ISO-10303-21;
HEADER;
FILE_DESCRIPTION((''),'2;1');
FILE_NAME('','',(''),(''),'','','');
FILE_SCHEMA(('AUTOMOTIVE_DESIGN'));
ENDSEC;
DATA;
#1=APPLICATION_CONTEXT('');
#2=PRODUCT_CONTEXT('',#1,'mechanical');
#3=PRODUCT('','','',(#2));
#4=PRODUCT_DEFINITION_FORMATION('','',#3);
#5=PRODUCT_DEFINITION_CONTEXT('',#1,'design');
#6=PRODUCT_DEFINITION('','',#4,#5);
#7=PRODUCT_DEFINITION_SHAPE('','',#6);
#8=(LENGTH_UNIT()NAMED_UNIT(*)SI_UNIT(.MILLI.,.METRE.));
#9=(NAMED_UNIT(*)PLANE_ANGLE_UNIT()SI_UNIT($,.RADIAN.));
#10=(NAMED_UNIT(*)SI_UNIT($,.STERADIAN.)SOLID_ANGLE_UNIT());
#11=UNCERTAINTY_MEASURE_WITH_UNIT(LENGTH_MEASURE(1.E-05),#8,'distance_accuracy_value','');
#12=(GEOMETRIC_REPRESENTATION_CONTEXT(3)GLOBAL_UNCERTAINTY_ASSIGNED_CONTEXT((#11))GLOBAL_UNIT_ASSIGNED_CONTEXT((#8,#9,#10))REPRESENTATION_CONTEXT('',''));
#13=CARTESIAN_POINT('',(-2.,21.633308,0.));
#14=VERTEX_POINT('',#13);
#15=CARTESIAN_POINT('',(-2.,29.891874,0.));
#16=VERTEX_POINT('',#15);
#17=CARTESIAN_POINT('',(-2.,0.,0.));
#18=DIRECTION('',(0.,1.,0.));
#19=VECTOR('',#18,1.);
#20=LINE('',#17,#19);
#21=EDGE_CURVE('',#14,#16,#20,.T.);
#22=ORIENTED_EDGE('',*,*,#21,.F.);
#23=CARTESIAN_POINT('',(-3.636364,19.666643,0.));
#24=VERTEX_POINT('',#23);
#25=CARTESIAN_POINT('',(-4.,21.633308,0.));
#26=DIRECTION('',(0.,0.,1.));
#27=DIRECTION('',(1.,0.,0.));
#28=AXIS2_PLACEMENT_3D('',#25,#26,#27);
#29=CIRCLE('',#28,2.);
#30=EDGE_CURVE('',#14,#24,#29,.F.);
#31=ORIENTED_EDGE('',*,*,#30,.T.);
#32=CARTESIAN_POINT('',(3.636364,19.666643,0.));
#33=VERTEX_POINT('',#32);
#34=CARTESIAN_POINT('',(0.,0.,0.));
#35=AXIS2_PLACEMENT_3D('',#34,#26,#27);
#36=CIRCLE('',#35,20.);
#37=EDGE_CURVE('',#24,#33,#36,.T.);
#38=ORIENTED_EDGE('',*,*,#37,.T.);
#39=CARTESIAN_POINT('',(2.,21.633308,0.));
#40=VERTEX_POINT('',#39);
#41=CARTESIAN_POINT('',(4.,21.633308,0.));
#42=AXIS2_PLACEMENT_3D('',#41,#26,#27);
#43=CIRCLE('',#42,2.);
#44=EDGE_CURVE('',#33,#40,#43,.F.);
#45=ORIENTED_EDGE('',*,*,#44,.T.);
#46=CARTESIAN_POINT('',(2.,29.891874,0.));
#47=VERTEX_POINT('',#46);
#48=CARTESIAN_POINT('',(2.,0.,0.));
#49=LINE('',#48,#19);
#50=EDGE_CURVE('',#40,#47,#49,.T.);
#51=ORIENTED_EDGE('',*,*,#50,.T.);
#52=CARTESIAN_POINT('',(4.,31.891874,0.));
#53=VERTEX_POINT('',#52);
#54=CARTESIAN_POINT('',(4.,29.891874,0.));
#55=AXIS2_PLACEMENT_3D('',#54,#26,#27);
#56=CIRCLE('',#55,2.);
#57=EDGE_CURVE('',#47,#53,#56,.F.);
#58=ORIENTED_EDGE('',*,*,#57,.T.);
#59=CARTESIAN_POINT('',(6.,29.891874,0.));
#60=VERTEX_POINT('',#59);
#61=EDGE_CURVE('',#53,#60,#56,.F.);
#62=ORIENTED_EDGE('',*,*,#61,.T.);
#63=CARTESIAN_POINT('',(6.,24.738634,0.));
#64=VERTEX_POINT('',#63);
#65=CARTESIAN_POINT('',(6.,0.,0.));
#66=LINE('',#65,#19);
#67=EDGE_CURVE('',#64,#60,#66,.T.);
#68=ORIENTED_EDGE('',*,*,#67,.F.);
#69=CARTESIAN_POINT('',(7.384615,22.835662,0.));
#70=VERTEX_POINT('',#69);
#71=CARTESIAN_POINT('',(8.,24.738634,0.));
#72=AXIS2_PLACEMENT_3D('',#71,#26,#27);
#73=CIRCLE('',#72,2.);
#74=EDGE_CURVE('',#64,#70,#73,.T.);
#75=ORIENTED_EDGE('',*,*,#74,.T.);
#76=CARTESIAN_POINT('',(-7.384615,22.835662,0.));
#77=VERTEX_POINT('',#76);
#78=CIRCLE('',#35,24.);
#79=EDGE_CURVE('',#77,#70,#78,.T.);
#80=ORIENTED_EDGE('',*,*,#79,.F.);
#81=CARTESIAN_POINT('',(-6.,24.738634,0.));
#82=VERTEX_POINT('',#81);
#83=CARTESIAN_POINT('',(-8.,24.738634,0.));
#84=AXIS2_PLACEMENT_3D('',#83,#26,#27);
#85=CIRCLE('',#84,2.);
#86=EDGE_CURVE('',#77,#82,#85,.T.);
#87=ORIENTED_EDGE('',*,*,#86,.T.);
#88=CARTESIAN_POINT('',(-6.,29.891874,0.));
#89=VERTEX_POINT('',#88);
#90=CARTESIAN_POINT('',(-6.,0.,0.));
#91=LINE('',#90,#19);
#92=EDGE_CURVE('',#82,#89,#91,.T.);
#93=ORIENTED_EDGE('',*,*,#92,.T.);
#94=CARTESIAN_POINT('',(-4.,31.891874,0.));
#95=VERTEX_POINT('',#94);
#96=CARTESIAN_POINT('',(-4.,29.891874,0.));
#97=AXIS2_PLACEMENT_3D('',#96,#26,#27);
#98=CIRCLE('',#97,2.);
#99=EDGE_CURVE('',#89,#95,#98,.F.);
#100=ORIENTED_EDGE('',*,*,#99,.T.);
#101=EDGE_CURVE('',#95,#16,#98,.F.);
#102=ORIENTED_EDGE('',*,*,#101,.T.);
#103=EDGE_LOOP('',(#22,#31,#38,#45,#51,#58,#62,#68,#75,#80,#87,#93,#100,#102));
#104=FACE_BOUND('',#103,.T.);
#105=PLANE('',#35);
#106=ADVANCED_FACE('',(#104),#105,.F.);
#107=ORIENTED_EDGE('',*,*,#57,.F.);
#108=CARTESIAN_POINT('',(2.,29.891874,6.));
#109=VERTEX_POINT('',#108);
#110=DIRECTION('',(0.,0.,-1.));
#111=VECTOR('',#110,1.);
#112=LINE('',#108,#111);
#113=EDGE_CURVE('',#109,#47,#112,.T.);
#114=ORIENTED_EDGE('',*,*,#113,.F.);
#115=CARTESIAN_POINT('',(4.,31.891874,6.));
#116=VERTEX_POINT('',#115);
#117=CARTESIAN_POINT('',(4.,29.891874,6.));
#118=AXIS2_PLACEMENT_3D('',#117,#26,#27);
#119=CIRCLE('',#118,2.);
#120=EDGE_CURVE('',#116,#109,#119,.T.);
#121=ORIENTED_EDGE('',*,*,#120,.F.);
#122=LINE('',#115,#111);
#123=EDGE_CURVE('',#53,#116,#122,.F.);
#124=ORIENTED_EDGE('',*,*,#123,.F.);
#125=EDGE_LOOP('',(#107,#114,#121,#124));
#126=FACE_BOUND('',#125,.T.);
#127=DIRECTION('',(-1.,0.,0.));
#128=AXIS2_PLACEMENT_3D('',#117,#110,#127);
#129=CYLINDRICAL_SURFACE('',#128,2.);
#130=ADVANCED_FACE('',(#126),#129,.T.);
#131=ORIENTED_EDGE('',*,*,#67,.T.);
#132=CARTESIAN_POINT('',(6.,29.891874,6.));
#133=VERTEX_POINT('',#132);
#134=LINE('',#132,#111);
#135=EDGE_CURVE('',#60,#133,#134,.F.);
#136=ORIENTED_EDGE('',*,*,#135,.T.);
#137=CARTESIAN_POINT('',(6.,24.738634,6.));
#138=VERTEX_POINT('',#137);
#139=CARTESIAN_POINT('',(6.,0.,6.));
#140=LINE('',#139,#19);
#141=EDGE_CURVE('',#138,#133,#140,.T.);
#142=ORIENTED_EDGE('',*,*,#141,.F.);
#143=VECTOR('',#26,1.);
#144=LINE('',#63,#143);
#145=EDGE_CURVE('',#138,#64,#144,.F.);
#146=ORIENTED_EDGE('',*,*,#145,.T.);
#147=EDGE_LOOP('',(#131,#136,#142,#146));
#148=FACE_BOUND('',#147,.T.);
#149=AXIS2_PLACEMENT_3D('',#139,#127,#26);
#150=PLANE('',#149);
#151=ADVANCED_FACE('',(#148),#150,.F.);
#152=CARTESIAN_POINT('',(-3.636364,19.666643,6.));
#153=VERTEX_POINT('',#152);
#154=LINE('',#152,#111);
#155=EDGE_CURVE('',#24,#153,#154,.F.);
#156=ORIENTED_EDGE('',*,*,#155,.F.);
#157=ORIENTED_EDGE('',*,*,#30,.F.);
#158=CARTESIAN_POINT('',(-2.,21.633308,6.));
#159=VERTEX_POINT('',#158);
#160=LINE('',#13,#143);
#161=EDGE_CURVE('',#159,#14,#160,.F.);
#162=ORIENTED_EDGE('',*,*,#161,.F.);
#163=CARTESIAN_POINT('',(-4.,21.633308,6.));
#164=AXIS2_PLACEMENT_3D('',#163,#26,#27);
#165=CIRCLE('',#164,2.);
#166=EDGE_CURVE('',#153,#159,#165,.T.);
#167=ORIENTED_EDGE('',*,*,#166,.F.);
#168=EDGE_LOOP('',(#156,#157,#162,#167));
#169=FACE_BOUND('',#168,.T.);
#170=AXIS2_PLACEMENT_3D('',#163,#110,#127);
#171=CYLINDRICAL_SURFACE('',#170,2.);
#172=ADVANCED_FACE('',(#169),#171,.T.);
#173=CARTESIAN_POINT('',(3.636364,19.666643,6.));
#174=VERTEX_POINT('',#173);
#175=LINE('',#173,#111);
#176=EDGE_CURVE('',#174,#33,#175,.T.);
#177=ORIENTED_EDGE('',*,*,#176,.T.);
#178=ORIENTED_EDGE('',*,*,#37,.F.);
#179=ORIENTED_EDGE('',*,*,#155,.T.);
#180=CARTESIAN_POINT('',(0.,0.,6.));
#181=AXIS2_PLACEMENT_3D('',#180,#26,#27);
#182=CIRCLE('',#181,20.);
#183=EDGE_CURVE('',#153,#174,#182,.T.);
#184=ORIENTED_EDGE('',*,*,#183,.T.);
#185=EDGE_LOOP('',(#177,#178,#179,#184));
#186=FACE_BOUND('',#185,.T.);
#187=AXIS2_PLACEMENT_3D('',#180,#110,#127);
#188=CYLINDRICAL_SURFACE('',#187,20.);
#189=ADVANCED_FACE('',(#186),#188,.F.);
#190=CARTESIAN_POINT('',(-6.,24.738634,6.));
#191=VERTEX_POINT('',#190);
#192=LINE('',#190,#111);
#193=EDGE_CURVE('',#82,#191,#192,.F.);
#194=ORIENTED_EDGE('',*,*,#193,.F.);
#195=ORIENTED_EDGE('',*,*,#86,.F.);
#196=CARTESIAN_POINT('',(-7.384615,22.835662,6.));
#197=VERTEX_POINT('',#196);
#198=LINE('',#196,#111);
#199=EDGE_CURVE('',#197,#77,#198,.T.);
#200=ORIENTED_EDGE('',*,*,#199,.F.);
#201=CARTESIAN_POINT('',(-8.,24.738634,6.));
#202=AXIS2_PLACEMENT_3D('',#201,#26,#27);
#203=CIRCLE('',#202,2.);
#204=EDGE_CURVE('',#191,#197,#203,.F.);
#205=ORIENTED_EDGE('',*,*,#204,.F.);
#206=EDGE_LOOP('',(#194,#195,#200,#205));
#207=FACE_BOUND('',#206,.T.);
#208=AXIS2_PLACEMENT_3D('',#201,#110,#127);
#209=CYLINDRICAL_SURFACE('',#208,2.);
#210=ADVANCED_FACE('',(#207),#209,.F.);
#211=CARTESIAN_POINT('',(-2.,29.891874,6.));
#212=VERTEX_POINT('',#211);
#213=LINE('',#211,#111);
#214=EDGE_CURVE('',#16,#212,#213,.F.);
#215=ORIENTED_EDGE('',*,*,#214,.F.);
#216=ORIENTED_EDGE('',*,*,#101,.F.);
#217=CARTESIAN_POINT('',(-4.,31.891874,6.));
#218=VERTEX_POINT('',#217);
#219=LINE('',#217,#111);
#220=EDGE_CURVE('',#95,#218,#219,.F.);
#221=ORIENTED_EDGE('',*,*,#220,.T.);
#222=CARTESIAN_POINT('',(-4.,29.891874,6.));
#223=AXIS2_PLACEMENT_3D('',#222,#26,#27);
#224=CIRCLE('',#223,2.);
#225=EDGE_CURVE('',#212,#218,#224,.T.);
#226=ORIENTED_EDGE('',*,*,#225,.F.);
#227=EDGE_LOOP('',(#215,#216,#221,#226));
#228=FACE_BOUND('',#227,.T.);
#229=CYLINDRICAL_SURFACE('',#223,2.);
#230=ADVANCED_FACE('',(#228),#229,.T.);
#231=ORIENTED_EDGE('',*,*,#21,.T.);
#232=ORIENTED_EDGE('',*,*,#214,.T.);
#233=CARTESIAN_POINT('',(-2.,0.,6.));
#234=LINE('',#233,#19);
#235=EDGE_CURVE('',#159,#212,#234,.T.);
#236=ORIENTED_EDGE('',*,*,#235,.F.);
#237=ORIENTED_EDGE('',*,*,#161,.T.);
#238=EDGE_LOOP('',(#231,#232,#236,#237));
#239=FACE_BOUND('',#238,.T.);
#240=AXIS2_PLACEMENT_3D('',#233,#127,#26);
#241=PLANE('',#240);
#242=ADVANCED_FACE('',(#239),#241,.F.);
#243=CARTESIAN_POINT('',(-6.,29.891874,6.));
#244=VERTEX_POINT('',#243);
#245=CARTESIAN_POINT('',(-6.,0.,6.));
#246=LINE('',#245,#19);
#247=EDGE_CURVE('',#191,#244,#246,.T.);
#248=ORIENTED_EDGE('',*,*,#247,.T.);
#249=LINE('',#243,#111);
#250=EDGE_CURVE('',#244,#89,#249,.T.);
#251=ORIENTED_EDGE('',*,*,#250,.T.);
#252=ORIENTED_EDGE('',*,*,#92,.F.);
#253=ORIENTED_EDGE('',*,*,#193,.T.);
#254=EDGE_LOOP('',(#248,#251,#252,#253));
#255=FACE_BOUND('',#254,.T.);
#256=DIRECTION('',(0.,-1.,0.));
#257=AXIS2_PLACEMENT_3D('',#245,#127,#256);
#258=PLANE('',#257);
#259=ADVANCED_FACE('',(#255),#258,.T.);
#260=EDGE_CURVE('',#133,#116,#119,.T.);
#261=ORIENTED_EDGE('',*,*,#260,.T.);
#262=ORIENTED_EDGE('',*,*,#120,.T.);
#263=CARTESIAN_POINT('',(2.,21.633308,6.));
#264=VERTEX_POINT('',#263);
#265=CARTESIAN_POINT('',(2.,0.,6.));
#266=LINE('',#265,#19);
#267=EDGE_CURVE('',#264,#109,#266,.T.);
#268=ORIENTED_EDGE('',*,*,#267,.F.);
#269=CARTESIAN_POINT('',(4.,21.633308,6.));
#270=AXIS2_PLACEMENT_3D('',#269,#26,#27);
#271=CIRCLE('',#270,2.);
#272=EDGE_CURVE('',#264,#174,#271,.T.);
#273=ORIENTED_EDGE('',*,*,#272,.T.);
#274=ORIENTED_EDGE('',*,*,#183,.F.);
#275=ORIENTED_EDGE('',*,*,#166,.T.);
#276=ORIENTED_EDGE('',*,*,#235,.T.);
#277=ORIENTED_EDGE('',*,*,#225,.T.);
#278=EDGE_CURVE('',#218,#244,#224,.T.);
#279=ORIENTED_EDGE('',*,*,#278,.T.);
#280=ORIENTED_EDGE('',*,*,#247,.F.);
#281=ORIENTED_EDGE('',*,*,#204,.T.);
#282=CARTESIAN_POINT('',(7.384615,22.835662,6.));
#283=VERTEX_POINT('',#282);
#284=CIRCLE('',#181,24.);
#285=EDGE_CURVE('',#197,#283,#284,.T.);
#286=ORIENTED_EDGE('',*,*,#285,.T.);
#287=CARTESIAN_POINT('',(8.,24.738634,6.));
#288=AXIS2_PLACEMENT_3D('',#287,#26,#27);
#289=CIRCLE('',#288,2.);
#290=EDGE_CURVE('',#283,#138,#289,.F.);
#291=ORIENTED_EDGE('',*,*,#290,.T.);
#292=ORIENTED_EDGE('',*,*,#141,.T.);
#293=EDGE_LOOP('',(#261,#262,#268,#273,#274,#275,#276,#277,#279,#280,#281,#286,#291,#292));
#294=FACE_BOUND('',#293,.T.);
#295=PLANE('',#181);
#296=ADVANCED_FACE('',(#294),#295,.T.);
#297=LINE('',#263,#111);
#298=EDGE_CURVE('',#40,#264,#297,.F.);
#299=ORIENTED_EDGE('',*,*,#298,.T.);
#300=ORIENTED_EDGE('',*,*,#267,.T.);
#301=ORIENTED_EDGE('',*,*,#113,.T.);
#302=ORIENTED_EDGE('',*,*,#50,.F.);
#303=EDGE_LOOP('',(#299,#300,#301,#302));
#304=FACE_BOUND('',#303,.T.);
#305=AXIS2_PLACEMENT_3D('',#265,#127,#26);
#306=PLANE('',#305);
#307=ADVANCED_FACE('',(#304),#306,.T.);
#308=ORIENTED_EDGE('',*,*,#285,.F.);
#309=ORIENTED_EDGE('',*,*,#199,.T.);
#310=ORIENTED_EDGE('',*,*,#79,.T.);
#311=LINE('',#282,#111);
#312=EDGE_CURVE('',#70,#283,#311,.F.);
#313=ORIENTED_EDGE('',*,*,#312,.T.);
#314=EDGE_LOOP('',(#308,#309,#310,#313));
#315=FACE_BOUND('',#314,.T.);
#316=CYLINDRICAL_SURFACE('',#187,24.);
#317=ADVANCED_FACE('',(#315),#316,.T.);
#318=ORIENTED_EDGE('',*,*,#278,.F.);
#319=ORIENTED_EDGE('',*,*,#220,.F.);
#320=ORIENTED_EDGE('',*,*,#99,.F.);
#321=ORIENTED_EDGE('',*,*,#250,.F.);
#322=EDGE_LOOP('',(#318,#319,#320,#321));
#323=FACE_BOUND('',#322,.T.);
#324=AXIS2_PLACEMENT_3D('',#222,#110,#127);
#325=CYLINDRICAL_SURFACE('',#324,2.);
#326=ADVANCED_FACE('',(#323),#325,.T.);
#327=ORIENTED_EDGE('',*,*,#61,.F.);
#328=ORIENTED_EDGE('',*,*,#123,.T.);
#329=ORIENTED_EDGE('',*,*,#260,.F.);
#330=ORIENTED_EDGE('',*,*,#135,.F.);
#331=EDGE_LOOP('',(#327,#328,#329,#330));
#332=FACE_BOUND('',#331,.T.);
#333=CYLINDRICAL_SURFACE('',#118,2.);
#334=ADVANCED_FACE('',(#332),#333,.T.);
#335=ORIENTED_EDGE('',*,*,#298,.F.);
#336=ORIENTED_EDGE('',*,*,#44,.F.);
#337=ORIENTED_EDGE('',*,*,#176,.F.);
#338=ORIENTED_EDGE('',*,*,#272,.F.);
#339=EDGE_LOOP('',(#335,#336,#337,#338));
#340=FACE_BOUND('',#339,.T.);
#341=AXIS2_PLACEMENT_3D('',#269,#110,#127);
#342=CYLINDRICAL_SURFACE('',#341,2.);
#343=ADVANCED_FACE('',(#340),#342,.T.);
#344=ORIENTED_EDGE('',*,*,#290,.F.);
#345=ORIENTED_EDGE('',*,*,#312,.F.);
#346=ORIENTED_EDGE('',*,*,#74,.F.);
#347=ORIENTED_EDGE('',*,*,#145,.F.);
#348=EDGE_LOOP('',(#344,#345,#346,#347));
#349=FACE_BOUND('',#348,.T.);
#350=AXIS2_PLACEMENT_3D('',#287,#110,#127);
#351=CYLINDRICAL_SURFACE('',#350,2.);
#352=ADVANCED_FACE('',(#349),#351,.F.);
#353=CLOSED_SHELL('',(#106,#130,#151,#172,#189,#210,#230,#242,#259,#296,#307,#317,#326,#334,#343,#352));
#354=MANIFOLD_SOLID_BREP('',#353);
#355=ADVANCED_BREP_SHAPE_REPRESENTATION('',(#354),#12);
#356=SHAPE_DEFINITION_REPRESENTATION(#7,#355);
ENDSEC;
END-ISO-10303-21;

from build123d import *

# Parameters (mm, degrees)
BOSS_EXTRUDE1_DEPTH = 6
FILLET1_R           = 2


with BuildPart() as part:
    # Sketch1 → Boss-Extrude1 (new body)
    with BuildSketch(Plane.XY):
        with BuildLine():
            Line((-6, 23.237900077), (-6, 31.891873593))
            Line((-6, 31.891873593), (-2, 31.891873593))
            Line((-2, 31.891873593), (-2, 19.899748742))
            ThreePointArc((-2, 19.899748742), (0, -20), (2, 19.899748742))
            Line((2, 19.899748742), (2, 31.891873593))
            Line((2, 31.891873593), (6, 31.891873593))
            Line((6, 31.891873593), (6, 23.237900077))
            ThreePointArc((6, 23.237900077), (0, -24), (-6, 23.237900077))
        make_face()
    extrude(amount=BOSS_EXTRUDE1_DEPTH)

    # Fillet1
    fillet1_edges = [part.edges().sort_by_distance(p)[0] for p in [
        (-2, 19.899748742, 3),
        (2, 19.899748742, 3),
        (6, 23.237900077, 3),
        (-6, 23.237900077, 3),
        (6, 31.891873593, 3),
        (2, 31.891873593, 3),
        (-2, 31.891873593, 3),
        (-6, 31.891873593, 3),
    ]]
    fillet(fillet1_edges, radius=FILLET1_R - 0.0001)  # a hair under: the kernel refuses the full size


solid = part.part
